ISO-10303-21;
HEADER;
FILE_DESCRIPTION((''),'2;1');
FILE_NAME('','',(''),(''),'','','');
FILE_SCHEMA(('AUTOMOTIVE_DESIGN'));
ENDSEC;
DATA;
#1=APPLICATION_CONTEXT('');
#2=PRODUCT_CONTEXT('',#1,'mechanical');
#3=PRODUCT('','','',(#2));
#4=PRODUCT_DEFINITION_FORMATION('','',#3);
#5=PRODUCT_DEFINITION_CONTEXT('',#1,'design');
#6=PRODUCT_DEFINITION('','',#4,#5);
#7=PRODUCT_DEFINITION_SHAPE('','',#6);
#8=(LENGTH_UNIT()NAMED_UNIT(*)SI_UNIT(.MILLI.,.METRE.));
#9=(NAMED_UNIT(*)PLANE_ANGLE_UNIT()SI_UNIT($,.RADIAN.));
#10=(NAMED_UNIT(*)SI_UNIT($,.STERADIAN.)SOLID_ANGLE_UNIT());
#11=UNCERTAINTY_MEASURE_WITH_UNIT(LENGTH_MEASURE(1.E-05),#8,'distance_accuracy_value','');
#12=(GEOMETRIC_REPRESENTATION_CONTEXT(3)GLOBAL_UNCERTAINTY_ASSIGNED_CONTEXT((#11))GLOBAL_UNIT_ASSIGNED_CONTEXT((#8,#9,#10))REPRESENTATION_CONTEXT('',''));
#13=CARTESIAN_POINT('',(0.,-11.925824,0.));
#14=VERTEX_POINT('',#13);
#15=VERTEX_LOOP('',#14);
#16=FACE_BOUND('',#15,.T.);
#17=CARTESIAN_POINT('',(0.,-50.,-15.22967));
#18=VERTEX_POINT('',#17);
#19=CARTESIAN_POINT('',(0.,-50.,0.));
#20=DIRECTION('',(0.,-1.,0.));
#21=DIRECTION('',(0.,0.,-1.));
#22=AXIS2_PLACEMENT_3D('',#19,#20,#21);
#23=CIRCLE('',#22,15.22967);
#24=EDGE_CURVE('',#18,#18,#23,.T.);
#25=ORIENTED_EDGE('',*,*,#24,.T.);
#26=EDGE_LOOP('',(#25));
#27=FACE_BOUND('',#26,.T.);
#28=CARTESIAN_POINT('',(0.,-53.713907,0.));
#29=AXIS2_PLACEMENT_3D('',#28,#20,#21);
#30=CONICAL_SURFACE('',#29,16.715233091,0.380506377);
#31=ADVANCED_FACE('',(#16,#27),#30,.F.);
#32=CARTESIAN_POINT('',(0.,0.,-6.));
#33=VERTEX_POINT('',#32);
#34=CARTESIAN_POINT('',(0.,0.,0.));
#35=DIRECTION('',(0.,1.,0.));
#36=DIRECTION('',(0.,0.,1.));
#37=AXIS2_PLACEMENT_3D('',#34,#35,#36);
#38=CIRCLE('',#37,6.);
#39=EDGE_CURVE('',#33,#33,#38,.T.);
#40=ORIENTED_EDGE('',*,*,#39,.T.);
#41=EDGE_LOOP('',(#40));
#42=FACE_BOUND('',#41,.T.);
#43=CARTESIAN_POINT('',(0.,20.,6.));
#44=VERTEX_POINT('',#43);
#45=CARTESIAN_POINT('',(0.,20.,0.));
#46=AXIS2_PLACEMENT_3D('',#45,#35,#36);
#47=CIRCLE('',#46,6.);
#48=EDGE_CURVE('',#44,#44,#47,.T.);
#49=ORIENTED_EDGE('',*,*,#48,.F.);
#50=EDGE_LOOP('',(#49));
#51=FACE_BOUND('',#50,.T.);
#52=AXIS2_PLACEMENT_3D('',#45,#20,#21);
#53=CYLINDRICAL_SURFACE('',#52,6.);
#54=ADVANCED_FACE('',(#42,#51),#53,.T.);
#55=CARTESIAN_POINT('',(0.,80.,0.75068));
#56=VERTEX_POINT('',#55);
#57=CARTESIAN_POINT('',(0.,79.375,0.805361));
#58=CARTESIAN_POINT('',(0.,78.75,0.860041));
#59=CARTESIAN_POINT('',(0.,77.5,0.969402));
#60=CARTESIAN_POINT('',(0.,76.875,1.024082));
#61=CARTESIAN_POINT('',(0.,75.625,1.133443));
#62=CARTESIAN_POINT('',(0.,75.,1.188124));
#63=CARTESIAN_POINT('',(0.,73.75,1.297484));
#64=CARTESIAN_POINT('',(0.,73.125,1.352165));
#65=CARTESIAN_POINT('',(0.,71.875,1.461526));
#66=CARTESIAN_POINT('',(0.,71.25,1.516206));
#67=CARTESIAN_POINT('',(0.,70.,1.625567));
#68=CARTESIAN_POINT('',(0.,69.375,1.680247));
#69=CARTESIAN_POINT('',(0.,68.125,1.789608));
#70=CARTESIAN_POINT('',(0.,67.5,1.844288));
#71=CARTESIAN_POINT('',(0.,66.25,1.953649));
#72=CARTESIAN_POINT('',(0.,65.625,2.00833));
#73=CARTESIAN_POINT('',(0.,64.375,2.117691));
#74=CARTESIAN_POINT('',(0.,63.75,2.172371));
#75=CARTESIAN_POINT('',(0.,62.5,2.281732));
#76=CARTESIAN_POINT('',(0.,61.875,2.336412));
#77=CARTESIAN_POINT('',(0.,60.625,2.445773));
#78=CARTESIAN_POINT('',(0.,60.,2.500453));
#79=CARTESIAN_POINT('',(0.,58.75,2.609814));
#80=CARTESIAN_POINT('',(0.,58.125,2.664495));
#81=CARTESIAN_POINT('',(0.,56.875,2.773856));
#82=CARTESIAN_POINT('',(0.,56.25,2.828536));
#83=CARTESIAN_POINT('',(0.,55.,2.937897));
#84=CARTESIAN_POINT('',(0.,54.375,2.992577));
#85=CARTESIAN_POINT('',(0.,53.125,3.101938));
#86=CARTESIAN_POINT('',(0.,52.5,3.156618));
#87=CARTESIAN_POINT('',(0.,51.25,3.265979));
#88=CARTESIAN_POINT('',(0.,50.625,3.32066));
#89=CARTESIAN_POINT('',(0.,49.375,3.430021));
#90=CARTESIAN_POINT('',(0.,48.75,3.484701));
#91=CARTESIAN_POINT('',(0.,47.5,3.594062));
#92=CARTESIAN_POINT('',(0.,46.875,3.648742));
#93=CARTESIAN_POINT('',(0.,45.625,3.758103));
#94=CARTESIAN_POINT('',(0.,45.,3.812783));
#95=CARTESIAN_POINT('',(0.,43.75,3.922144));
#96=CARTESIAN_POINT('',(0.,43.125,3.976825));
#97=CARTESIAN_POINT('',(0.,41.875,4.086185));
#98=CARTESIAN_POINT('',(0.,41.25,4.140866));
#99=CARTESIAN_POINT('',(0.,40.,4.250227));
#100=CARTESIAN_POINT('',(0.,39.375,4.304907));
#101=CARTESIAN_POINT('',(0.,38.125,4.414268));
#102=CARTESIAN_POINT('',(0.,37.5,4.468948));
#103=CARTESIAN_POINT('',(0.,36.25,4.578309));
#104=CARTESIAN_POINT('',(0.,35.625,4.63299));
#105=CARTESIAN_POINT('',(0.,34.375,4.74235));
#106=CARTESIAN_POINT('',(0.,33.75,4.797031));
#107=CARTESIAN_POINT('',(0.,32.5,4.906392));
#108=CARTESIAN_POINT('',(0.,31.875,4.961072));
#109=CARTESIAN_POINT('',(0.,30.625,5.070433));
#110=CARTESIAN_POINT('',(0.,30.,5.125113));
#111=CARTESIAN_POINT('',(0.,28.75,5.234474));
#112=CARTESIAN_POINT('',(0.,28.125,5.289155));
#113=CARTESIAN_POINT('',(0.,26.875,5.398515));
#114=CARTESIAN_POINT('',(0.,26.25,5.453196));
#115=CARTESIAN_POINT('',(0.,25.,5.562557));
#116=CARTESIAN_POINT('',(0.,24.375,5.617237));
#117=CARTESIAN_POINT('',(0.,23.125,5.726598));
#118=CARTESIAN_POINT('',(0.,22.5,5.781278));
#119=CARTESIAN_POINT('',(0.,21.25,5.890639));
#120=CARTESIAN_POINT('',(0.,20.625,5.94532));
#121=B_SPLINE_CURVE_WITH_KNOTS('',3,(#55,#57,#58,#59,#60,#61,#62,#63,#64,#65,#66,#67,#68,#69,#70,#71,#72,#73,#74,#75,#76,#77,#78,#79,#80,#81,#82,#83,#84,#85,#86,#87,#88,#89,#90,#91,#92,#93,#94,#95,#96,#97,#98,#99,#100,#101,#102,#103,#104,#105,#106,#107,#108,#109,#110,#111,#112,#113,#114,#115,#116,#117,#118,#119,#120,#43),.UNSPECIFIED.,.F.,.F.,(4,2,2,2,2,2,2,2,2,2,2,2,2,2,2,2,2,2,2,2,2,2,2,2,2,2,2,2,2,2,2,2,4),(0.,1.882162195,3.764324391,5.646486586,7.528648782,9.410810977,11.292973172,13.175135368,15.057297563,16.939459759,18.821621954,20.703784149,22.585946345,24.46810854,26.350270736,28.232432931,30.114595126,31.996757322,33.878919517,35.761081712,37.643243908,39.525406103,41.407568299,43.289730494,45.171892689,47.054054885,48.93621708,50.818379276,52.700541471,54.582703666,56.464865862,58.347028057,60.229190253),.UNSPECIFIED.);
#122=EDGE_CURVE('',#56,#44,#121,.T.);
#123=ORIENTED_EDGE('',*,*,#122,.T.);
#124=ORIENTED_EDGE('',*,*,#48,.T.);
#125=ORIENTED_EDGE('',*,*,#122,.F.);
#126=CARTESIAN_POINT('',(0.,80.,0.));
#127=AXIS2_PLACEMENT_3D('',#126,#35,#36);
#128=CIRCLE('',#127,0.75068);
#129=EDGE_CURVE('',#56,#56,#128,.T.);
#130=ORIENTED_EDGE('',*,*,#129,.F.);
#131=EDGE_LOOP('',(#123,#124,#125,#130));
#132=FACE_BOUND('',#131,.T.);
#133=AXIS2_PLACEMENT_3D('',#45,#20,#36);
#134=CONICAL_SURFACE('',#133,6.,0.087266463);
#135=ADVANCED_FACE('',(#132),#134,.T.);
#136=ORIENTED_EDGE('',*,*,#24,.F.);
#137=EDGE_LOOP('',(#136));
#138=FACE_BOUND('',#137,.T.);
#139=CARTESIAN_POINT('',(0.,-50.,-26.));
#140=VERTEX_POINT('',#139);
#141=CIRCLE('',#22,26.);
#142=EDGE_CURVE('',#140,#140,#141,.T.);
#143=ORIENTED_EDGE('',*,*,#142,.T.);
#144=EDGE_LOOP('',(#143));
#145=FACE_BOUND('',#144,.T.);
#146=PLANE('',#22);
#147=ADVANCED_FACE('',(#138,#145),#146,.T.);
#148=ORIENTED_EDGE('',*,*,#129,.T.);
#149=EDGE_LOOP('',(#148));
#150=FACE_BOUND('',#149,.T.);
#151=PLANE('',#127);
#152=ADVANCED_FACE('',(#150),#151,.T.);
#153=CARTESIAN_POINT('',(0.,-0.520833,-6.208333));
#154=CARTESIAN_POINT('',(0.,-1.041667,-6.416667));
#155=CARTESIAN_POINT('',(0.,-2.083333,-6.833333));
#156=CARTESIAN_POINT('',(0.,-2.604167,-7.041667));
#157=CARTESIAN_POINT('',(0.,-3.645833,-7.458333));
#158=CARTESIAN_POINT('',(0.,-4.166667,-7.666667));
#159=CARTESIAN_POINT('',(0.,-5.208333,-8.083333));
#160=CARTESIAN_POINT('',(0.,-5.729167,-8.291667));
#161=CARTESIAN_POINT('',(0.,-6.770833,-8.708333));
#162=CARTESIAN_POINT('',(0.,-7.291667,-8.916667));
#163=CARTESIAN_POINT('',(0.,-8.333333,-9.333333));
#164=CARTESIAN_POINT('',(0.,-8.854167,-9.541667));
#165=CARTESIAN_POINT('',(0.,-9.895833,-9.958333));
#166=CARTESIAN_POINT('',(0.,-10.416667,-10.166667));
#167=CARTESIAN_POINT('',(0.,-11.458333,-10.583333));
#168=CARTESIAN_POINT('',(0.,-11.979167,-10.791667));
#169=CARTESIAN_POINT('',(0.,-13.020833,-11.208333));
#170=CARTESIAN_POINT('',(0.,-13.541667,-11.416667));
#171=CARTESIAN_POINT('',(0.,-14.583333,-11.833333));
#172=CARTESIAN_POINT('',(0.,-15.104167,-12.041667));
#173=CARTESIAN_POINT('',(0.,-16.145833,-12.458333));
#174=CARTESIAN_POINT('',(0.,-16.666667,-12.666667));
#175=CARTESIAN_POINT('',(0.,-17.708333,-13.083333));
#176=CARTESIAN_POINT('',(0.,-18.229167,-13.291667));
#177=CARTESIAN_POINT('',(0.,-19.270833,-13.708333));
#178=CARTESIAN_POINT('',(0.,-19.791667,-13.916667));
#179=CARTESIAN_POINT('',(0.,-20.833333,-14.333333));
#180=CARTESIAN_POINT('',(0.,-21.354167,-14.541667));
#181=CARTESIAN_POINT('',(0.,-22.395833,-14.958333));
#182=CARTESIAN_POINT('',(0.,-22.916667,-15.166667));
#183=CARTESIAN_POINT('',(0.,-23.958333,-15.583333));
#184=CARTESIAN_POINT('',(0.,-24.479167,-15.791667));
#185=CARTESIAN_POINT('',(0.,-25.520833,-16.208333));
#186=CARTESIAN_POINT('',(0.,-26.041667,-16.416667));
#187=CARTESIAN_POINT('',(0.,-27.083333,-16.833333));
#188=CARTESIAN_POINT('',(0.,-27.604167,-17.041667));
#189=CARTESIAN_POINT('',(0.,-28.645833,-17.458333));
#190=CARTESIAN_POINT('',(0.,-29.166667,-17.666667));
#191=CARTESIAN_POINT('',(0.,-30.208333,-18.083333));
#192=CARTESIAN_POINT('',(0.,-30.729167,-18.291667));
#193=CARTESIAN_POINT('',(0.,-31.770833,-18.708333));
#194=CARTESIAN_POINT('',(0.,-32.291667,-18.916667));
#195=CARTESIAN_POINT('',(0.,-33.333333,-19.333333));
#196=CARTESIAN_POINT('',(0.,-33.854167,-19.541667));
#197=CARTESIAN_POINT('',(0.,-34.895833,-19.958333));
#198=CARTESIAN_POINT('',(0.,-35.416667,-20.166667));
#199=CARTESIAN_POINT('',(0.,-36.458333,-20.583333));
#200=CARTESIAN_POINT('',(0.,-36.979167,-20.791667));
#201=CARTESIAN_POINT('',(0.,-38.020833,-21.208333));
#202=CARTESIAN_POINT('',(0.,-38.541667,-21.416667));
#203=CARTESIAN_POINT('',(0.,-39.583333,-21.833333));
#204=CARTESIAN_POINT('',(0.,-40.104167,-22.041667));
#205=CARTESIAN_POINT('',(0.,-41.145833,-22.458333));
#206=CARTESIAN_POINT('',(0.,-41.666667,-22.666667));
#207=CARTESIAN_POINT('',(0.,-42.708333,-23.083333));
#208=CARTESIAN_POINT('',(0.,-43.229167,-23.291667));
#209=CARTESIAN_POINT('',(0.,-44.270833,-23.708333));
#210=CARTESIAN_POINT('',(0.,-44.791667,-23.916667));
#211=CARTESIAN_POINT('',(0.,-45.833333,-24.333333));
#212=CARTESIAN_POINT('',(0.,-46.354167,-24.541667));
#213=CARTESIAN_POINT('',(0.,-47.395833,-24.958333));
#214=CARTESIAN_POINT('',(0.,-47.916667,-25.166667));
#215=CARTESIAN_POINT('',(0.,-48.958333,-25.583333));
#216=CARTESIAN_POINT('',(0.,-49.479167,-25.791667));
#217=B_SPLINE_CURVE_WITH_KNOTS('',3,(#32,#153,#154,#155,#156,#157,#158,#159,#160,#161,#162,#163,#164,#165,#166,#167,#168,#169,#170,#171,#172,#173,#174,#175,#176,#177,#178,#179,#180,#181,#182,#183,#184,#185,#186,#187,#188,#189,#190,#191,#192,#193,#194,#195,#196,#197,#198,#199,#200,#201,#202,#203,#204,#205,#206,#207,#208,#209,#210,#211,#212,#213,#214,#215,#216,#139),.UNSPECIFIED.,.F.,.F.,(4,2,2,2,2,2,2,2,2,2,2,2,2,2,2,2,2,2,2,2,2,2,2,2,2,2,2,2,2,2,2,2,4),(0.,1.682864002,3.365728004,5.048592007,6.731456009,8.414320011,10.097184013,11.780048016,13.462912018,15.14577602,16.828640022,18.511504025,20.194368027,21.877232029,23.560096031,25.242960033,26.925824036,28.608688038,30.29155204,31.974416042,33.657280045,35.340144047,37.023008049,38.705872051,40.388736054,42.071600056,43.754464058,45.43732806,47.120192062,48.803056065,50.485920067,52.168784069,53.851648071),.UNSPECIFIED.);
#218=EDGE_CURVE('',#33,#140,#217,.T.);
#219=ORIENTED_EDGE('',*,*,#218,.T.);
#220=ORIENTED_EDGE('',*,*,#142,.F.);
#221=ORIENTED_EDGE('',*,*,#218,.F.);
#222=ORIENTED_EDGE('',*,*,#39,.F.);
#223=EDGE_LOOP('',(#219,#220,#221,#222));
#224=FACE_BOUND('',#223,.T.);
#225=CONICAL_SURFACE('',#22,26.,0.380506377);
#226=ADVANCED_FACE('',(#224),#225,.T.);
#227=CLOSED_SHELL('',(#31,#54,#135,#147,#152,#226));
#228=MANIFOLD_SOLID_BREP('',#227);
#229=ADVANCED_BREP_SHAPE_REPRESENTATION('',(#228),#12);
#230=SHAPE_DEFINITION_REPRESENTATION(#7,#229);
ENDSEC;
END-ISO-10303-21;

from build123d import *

# Parameters (mm, degrees)
SKETCH1_R           = 6
BOSS_EXTRUDE1_DEPTH = 20
SKETCH2_R           = 26
BOSS_EXTRUDE2_DEPTH = 50
CHAMFER1_SIZE       = 50
CHAMFER1_SIZE_2     = 20
SKETCH3_R           = 6
BOSS_EXTRUDE3_DEPTH = 60
BOSS_EXTRUDE3_TAPER = 5


# Read off the part's stored shape, not the designer's step: Shell1
with BuildPart() as part:
    # Sketch1 → Boss-Extrude1 (new body)
    with BuildSketch(Plane(origin=(0, 0, 0), x_dir=(1, 0, 0), z_dir=(0, 1, 0))):
        with Locations(Location((0, 0, 0), (0, 0, 270))):
            Circle(SKETCH1_R)
    extrude(amount=BOSS_EXTRUDE1_DEPTH)

    # Sketch2 → Boss-Extrude2 (add)
    with BuildSketch(Plane.XZ):
        with Locations(Location((0, 0, 0), (0, 0, 270))):
            Circle(SKETCH2_R)
    extrude(amount=BOSS_EXTRUDE2_DEPTH)

    # Chamfer1
    # the kernel refuses this chamfer: 50, 20 mm, written as the material it takes off along each edge
    with BuildSketch(Plane(origin=(0, 0, 0), x_dir=(0, 0, -1), z_dir=(-1, 0, 0))) as chamfer1_piece_1:
        Polygon((26, CHAMFER1_SIZE), (26 - CHAMFER1_SIZE_2, 0), (26, 0), align=None)
    revolve(axis=Axis((0, 0, 0), (0, -1, 0)), mode=Mode.SUBTRACT)

    # Shell1 outline → Shell1 (revolve, cut)
    with BuildSketch(Plane.XY):
        Polygon((15.229670386, -50), (0, -11.925824036), (0, -50), align=None)
    revolve(axis=Axis((0, 0, 0), (0, 1, 0)), mode=Mode.SUBTRACT)

    # Sketch3 → Boss-Extrude3 (add)
    with BuildSketch(Plane(origin=(0, 20, 0), x_dir=(1, 0, 0), z_dir=(0, 1, 0))):
        with Locations(Location((0, 0, 0), (0, 0, 90))):
            Circle(SKETCH3_R)
    extrude(amount=BOSS_EXTRUDE3_DEPTH, taper=BOSS_EXTRUDE3_TAPER)


solid = part.part
